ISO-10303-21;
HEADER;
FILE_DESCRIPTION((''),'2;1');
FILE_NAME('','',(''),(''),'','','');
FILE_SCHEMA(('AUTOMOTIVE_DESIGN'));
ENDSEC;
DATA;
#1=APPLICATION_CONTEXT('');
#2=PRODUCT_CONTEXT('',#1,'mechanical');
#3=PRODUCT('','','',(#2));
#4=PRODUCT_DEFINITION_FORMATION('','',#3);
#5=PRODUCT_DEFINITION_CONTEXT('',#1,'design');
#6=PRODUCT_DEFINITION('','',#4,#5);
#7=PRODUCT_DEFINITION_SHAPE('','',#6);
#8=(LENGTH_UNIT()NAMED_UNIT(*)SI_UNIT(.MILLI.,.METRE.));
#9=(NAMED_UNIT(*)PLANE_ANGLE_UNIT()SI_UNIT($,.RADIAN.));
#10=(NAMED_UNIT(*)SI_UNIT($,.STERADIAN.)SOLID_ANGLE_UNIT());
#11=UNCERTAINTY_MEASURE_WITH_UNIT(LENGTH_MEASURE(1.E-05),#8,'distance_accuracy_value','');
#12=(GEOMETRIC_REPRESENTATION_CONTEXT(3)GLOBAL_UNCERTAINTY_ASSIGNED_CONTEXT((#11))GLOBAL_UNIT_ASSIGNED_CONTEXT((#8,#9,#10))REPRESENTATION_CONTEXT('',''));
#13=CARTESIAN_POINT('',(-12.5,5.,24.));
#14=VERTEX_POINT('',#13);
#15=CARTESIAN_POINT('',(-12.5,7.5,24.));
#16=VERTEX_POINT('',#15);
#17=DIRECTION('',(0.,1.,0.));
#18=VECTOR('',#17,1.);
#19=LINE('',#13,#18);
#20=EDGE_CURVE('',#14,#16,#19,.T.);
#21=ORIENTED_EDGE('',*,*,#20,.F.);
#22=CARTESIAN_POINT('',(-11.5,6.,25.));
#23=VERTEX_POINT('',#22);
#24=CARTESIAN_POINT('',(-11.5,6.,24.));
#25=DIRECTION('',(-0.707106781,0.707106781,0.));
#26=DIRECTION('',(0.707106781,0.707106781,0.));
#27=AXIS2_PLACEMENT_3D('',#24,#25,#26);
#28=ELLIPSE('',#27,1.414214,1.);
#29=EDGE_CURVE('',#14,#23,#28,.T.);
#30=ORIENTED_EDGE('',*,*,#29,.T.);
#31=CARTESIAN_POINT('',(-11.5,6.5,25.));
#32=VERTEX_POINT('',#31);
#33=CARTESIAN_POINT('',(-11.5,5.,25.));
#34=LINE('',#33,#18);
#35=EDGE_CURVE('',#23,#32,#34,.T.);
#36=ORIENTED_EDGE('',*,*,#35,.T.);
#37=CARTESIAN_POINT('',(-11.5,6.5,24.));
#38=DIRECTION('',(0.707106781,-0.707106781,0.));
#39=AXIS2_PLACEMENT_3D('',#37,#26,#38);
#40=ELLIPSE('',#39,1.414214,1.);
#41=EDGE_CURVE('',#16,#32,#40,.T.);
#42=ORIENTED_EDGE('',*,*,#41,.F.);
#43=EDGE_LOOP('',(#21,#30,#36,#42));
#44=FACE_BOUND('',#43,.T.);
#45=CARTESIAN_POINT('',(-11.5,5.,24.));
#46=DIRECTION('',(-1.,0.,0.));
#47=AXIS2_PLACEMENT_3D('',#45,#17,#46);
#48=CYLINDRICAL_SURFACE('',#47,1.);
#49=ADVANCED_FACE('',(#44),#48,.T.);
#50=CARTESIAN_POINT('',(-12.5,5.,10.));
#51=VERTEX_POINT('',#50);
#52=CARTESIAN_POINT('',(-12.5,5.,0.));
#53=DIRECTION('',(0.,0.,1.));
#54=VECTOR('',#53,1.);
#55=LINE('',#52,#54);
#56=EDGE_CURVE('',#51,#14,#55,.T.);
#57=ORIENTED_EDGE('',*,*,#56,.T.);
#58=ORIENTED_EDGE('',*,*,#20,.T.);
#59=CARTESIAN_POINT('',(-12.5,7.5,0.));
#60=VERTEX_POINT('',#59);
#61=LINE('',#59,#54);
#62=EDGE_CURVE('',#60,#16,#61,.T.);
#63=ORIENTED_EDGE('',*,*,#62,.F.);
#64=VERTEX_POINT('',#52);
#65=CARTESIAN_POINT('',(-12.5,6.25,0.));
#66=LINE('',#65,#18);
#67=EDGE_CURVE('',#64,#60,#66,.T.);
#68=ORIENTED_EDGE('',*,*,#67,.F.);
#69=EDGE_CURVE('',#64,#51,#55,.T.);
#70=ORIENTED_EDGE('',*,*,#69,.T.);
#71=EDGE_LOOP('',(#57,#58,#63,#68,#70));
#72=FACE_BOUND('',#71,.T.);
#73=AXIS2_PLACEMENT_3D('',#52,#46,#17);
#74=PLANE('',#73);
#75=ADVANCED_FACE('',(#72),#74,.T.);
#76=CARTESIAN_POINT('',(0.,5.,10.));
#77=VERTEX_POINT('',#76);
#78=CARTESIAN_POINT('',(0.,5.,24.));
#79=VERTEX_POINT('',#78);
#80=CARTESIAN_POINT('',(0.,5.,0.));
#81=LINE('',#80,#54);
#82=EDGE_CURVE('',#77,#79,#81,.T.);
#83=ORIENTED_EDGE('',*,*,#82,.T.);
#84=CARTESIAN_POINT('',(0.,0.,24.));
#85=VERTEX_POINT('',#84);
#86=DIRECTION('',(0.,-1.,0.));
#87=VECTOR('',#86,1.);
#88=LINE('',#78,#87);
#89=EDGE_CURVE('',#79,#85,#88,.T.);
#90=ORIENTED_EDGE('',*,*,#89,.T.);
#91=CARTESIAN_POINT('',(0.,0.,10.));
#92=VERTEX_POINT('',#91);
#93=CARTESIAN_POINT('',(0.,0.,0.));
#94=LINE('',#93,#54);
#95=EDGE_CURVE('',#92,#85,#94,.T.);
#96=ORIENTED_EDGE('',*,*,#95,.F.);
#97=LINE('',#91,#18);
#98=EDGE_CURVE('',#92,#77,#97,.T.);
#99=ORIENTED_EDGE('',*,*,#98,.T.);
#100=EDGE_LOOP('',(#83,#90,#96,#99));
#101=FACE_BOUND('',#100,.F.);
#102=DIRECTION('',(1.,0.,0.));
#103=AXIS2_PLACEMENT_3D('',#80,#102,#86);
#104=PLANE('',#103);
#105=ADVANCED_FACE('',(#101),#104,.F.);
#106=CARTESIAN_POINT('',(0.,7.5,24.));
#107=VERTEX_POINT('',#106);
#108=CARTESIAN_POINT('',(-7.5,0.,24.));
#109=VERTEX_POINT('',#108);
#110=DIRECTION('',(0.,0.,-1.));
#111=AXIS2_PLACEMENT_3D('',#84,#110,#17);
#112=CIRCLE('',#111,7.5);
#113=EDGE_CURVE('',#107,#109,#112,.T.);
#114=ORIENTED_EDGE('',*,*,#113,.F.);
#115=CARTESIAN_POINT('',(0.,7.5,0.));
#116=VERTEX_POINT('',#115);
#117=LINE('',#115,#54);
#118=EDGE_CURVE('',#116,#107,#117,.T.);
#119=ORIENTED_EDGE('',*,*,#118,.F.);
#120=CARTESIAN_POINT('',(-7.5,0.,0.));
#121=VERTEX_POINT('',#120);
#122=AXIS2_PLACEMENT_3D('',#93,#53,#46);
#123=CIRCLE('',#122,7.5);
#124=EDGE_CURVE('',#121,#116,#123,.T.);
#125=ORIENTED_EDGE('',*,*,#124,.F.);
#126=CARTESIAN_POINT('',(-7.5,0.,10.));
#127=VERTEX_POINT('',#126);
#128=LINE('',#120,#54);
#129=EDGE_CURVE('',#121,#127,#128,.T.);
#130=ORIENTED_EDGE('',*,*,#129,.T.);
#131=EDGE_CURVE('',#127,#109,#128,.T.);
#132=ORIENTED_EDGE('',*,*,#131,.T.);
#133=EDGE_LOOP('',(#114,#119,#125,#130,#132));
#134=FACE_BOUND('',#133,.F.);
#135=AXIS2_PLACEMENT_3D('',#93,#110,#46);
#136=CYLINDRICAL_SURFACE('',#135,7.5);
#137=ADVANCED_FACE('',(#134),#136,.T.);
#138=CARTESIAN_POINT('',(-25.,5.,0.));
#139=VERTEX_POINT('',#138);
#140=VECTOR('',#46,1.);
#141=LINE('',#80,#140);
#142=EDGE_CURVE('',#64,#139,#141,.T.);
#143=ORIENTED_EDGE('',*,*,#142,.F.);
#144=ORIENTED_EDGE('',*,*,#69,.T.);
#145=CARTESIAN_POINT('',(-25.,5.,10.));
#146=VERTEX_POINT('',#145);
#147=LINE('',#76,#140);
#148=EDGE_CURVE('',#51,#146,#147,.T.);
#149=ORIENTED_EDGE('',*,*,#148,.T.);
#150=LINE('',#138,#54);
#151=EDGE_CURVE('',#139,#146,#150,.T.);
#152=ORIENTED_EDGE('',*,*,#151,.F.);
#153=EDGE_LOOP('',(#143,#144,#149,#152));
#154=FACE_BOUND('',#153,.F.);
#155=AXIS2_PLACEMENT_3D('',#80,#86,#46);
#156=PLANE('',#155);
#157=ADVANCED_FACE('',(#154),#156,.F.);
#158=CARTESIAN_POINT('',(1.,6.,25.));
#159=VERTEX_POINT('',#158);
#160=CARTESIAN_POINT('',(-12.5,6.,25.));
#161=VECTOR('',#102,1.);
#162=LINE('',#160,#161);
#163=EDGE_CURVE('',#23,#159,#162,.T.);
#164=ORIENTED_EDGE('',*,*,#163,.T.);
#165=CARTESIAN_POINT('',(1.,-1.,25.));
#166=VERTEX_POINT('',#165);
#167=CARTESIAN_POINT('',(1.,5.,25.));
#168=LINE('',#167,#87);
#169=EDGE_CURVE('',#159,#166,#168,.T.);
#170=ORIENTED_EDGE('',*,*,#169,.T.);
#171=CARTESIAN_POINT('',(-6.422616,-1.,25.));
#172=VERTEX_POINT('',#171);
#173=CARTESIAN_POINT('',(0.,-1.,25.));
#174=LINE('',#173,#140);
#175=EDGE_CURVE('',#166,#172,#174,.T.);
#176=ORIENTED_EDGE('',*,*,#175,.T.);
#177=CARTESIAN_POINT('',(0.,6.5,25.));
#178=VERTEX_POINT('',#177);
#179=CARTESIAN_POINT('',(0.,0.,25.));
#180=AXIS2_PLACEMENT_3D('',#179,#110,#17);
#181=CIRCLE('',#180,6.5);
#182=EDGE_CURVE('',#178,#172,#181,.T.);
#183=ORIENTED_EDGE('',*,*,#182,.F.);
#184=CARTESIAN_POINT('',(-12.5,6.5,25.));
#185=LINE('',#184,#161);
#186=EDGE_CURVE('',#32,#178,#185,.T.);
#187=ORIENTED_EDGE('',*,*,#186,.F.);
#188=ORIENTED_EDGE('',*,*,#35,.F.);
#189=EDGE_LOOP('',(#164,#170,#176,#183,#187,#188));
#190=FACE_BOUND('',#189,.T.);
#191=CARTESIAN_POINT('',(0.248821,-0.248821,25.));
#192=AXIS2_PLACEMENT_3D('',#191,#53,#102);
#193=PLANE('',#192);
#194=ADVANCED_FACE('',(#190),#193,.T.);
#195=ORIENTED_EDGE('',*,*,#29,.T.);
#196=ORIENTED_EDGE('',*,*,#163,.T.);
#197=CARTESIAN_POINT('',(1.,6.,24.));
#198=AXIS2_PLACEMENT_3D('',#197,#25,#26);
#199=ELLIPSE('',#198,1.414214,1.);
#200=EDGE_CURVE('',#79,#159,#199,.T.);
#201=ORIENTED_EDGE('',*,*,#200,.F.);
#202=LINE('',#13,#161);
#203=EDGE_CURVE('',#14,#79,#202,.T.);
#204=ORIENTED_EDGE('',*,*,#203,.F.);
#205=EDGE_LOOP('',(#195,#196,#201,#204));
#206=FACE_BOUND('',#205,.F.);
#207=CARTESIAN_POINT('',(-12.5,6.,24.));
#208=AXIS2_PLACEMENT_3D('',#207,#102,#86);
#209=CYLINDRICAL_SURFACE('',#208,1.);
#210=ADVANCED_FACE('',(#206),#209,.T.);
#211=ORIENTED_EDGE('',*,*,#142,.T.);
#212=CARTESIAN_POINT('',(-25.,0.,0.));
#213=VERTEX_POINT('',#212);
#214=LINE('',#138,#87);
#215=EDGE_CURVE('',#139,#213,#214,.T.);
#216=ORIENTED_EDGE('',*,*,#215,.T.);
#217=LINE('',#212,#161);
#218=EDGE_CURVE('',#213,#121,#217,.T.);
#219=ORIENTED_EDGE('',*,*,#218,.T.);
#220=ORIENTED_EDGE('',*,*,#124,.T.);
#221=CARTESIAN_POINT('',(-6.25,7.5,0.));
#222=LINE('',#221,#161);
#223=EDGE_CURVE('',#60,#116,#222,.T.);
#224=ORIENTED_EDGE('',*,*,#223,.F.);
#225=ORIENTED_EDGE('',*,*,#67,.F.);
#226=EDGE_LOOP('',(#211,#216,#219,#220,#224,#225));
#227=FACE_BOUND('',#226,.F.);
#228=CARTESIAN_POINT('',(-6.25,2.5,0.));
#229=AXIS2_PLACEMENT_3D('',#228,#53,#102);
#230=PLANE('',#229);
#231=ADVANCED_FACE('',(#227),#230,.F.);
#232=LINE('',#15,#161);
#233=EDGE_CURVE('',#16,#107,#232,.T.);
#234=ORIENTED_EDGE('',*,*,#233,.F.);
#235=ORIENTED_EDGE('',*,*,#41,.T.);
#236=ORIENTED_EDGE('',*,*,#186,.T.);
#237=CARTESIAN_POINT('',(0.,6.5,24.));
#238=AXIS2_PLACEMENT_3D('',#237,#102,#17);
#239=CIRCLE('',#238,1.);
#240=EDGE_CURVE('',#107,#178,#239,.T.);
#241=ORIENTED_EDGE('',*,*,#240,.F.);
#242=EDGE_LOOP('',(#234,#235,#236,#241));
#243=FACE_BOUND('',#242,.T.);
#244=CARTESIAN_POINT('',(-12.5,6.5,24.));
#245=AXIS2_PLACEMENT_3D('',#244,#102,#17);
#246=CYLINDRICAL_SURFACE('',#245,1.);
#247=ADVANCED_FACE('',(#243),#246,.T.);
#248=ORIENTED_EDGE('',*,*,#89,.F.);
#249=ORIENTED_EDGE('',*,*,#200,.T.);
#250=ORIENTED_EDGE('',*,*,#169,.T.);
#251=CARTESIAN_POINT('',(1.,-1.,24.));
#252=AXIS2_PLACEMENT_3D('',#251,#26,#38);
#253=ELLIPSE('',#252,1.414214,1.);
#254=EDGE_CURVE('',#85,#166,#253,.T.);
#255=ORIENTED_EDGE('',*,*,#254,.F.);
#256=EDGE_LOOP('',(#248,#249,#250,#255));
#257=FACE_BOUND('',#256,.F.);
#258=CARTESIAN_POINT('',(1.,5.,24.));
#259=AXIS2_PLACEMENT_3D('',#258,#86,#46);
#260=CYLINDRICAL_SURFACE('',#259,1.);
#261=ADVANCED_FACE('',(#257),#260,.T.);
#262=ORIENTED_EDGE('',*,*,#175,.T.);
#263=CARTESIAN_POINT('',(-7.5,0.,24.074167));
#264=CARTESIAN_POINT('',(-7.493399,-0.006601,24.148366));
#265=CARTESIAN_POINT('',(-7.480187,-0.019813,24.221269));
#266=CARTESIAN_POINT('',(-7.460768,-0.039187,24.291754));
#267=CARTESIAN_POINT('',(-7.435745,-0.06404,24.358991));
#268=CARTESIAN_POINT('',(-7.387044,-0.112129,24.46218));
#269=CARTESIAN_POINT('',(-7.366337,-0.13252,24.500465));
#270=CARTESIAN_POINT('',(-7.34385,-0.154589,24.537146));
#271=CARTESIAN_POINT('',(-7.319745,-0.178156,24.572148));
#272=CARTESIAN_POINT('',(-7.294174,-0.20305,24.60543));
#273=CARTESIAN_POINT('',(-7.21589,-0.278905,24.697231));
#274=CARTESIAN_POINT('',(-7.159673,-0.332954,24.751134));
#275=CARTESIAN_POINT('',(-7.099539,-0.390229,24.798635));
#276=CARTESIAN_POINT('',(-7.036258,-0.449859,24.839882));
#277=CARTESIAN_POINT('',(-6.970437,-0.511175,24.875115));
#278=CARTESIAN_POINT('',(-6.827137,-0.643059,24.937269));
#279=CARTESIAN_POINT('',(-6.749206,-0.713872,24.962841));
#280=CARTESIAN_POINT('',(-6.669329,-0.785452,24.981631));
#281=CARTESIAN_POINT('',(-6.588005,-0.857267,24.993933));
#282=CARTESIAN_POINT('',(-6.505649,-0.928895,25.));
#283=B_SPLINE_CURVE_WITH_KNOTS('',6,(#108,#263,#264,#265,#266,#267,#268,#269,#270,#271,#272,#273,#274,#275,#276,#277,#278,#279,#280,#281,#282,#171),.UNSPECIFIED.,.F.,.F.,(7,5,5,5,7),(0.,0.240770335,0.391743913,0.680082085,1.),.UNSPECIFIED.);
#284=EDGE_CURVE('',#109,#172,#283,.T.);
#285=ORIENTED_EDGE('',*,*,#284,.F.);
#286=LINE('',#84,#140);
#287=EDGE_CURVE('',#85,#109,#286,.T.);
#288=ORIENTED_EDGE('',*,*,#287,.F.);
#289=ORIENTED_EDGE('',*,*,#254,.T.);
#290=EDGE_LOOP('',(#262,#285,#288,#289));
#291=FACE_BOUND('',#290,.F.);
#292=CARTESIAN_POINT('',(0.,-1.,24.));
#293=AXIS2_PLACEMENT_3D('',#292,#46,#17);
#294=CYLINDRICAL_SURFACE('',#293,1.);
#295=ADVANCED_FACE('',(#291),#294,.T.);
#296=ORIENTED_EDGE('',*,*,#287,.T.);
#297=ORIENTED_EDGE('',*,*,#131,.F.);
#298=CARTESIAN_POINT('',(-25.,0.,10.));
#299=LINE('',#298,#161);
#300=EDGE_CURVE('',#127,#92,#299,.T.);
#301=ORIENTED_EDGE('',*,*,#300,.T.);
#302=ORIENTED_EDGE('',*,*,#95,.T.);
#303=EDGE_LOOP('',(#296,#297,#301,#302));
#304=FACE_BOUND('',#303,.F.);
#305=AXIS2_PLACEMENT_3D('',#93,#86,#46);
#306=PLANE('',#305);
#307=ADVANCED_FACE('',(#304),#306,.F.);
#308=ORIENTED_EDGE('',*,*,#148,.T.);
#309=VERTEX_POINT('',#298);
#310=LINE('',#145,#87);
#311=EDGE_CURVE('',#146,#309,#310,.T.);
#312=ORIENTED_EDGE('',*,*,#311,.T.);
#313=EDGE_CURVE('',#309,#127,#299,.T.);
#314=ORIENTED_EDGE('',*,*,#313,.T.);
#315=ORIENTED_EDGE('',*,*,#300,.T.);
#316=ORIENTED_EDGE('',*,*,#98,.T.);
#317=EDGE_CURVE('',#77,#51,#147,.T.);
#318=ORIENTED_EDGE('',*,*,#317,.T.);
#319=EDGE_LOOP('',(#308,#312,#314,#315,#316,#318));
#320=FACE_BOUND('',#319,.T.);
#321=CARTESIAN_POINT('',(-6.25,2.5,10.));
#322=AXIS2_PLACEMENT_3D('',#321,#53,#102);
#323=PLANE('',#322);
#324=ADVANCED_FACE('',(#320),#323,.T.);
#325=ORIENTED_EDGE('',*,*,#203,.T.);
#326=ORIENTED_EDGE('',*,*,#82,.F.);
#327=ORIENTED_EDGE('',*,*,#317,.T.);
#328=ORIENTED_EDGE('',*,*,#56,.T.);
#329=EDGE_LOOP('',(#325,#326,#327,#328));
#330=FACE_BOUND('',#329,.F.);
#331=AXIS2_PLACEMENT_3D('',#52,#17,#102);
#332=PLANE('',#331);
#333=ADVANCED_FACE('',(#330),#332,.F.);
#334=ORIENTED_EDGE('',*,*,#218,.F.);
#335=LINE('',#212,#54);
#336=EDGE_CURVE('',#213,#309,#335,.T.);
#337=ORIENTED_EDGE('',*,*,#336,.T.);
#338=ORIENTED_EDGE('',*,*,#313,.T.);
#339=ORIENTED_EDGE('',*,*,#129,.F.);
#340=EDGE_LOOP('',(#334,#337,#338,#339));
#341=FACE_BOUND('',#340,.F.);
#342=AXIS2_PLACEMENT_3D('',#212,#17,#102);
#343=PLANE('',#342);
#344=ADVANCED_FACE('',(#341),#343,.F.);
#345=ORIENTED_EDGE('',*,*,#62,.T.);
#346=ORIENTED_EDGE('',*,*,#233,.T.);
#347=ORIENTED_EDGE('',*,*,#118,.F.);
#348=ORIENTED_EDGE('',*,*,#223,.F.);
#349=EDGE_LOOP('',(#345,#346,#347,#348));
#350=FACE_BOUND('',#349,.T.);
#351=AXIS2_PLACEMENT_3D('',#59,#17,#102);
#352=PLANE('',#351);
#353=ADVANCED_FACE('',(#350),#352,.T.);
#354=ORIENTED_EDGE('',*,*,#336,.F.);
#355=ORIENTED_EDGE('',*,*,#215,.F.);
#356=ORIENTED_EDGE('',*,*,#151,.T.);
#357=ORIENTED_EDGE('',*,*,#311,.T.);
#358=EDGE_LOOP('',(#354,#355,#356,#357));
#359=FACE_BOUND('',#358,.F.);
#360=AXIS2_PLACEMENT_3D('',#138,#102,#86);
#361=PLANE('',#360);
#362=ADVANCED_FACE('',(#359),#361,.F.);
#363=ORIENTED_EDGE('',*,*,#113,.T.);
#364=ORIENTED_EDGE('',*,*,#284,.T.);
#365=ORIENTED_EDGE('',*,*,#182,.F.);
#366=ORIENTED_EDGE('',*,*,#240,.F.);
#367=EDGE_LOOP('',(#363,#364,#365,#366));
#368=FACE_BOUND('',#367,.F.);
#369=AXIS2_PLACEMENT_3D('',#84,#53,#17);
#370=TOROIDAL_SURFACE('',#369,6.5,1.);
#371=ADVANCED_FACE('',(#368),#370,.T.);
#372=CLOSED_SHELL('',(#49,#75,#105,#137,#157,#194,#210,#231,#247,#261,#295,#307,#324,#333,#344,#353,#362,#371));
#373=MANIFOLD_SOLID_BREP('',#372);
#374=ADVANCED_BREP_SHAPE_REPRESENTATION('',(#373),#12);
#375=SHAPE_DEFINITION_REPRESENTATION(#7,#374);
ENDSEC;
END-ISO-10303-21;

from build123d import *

# Parameters (mm, degrees)
F0_W     = 12.5
F0_H     = 2.5
F1_DEPTH = 25
F2_R     = 1
F3_DEPTH = 10


with BuildPart() as f1:
    # F0 (on Top) → F1 (new body)
    with BuildSketch(Plane.XY):
        with BuildLine():
            Line((0, 7.5), (0, 5))
            Line((0, 5), (0, 0))
            Line((0, 0), (-7.5, 0))
            ThreePointArc((-7.5, 0), (0, -7.5), (7.5, 0))
            ThreePointArc((7.5, 0), (5.3033008589, 5.3033008589), (0, 7.5))
        make_face()
        with Locations((-6.25, 6.25)):
            Rectangle(F0_W, F0_H)
    extrude(amount=F1_DEPTH)

    # F2
    f2_edges = [f1.edges().sort_by_distance(p)[0] for p in [
        (-6.25, 7.5, 25),
        (-12.5, 6.25, 25),
        (-6.25, 5, 25),
        (0, 2.5, 25),
        (-3.75, 0, 25),
        (5.303301, -5.303301, 25),
    ]]
    fillet(f2_edges, radius=F2_R)

    # F0 (on Top) → F3 (join)
    with BuildSketch(Plane.XY):
        Polygon((0, 5), (-12.5, 5), (-12.5, 0), (-7.5, 0), (0, 0), align=None)
        with BuildLine():
            Line((-12.5, 0), (-12.5, 5))
            ThreePointArc((-12.5, 5), (-16.0355339059, 3.5355339059), (-17.5, 0))
            Line((-17.5, 0), (-12.5, 0))
        make_face()
        with BuildLine():
            ThreePointArc((-17.5, 0), (-16.0355339059, 3.5355339059), (-12.5, 5))
            Line((-12.5, 5), (-25, 5))
            Line((-25, 5), (-25, 0))
            Line((-25, 0), (-17.5, 0))
        make_face()
    extrude(amount=F3_DEPTH)


solid = f1.part
